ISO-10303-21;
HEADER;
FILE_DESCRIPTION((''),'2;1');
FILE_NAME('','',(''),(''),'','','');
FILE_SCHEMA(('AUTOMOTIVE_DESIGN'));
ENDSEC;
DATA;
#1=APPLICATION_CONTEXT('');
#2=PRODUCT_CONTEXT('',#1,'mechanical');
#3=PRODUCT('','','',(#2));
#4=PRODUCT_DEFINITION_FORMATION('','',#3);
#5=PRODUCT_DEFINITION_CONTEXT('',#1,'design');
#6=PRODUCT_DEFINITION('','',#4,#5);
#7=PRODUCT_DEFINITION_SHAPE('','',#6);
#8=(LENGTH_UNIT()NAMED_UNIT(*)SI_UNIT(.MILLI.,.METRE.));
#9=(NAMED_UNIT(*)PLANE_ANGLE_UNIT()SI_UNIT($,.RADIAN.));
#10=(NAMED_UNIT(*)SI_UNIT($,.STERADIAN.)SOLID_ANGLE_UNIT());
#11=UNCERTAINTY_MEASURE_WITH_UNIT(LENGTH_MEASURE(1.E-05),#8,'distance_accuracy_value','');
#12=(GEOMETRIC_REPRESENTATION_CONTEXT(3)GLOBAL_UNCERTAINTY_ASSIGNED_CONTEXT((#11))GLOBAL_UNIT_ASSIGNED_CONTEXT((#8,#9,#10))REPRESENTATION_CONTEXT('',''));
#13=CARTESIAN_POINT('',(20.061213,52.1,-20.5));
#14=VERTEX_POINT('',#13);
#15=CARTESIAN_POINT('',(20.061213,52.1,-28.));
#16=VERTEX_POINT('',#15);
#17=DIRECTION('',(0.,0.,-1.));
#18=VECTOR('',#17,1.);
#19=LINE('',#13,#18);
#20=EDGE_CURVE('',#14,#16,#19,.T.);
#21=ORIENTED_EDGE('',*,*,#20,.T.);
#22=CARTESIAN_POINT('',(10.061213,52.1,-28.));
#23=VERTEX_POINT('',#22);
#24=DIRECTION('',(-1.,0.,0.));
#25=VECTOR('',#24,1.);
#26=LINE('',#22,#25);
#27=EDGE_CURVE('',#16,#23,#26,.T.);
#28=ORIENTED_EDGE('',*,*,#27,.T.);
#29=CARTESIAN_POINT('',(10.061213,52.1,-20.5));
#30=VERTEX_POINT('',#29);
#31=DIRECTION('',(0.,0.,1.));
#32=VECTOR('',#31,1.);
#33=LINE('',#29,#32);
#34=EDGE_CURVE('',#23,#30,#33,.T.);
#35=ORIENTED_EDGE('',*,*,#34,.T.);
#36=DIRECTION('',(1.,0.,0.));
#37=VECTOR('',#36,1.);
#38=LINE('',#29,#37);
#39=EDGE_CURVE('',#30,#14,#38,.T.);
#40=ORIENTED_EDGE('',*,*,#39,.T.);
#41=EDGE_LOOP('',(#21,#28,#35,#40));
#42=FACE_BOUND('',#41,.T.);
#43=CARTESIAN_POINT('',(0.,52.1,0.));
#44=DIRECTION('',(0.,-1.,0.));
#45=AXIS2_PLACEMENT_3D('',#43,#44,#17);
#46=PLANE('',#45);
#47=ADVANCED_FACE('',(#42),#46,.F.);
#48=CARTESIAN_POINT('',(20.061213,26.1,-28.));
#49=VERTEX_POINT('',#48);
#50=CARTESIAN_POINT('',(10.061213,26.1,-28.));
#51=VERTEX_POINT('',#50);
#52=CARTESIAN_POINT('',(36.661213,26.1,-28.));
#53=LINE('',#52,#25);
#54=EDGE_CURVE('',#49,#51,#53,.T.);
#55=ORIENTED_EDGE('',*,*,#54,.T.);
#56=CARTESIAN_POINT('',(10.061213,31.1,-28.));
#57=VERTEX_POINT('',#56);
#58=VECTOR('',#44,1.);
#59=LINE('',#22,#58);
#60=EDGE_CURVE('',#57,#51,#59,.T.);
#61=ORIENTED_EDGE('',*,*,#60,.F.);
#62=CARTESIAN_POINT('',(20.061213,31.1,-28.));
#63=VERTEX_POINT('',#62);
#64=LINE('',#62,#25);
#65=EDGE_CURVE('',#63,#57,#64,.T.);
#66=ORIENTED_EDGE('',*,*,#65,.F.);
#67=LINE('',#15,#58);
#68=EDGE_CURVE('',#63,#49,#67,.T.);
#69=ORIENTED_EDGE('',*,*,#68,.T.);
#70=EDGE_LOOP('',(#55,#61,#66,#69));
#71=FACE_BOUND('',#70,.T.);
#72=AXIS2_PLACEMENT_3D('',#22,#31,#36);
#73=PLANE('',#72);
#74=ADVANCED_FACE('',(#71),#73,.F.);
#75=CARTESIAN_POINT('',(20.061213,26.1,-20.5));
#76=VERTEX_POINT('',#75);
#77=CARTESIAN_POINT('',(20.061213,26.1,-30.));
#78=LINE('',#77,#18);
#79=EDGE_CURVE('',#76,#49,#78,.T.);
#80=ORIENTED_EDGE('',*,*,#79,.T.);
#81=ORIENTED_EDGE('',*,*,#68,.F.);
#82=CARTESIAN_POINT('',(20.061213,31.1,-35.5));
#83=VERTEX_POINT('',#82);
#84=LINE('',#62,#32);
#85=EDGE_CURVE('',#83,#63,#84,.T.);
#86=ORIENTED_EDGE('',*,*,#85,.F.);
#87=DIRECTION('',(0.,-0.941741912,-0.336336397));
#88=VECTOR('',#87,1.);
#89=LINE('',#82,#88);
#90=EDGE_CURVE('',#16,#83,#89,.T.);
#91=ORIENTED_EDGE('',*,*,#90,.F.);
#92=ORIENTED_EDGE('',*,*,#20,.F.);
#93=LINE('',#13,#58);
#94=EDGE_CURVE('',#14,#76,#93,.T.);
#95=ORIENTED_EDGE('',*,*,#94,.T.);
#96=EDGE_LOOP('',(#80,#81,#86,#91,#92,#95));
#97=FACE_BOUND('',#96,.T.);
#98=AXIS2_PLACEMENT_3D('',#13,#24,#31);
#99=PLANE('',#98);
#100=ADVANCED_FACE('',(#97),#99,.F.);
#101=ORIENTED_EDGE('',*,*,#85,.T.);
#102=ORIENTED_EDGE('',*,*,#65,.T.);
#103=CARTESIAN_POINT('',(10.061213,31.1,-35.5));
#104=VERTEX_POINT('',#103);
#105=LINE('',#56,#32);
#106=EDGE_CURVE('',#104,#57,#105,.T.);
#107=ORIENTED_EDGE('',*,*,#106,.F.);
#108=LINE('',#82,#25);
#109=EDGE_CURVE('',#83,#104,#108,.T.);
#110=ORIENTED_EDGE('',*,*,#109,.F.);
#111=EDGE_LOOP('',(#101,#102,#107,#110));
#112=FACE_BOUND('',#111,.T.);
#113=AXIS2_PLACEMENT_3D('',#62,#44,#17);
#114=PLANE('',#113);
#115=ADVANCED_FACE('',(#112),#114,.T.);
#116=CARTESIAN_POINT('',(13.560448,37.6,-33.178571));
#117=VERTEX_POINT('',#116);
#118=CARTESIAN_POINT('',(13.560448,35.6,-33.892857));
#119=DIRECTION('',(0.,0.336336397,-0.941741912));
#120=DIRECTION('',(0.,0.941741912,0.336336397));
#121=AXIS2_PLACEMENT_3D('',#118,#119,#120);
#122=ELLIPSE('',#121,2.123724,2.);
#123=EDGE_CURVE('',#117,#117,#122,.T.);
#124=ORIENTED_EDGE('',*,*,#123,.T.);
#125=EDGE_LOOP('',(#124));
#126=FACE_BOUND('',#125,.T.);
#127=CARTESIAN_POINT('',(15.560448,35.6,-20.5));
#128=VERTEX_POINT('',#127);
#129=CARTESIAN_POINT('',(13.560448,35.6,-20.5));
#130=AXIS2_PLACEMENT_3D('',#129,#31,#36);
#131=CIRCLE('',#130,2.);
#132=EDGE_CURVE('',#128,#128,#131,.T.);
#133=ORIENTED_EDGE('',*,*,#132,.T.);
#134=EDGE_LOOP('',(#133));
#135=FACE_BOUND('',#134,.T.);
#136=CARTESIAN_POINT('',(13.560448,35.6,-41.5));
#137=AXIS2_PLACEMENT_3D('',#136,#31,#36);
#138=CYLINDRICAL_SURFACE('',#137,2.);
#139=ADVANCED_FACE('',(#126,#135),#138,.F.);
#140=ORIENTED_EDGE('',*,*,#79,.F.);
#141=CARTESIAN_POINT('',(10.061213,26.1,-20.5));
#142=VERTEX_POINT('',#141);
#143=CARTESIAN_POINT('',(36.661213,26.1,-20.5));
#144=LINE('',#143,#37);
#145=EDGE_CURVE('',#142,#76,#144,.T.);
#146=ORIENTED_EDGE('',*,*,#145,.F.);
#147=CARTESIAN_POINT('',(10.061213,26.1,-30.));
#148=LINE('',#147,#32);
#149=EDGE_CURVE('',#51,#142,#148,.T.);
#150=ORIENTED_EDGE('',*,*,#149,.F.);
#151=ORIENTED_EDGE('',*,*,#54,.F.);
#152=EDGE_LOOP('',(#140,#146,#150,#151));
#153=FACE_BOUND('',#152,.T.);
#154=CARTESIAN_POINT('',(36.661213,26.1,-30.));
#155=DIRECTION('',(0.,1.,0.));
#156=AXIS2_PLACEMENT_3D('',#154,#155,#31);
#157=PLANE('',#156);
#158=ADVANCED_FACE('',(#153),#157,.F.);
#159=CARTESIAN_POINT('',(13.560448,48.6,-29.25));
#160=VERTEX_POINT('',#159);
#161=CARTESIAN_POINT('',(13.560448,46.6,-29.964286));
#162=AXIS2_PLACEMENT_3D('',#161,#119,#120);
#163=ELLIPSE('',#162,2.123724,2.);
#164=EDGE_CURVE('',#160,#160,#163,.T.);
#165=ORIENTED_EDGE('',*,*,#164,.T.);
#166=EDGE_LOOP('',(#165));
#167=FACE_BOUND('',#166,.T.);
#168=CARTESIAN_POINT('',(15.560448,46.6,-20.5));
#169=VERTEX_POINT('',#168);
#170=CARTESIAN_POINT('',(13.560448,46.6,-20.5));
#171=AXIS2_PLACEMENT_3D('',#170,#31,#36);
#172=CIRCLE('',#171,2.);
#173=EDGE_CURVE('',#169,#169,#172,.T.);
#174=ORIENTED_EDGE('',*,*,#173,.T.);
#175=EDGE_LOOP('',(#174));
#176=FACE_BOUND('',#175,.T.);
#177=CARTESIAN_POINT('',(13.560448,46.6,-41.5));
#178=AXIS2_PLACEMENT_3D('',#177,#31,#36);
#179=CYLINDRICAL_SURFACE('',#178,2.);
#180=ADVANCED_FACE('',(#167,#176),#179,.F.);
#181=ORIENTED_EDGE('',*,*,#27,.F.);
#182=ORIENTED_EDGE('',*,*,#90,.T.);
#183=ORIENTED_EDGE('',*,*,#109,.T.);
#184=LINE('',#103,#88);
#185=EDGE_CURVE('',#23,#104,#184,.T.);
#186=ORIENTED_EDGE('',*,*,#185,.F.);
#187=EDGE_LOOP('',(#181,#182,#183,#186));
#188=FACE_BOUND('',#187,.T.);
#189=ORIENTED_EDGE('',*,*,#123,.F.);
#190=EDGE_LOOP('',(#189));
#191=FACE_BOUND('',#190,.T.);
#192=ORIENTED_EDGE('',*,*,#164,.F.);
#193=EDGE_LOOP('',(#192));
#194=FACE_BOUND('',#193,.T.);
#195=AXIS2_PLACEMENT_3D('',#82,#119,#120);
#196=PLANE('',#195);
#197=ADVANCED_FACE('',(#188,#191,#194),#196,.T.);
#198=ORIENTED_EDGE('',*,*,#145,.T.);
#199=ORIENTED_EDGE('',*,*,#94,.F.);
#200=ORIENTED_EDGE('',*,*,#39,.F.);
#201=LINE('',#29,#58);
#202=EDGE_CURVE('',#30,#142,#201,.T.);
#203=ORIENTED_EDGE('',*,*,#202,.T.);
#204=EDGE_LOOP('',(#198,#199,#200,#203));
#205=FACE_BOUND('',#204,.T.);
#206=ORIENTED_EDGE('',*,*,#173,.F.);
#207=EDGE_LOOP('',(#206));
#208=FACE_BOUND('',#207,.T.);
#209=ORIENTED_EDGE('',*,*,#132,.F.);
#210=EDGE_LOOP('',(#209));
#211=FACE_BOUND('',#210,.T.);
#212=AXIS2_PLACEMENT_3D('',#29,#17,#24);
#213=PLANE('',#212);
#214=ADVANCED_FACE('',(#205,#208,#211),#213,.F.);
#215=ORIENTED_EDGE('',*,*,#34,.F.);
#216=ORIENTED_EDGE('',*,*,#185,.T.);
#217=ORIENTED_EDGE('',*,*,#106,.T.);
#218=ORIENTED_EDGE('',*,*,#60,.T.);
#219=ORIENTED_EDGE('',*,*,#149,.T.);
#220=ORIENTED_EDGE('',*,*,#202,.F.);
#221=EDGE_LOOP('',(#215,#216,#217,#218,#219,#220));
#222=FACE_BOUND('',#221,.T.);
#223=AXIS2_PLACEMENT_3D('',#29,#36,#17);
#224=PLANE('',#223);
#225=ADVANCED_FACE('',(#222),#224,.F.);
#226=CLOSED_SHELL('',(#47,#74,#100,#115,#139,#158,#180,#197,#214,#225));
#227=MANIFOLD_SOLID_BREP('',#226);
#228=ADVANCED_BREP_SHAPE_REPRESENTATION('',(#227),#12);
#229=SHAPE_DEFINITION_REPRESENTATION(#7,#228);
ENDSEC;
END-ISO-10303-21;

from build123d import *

# Parameters (mm, degrees)
SALIENTE_EXTRUIR1_DEPTH    = 10
CROQUIS2_W                 = 5
CROQUIS2_H                 = 45
CORTAR_EXTRUIR1_DEPTH      = 12.5
CROQUIS4_W                 = 73.322426794
CROQUIS4_H                 = 5
SALIENTE_EXTRUIR2_DEPTH    = 30
CROQUIS5_W                 = 2.5
CROQUIS5_H                 = 5
SALIENTE_EXTRUIR3_DEPTH    = 50
CROQUIS6_W                 = 55.637494131
CROQUIS6_H                 = 64.414873678
CORTAR_EXTRUIR2_DEPTH      = 55
CROQUIS7_R                 = 1.5
CORTAR_EXTRUIR3_DEPTH      = 5
CROQUIS8_W                 = 39.981329184
CROQUIS8_H                 = 5
CORTAR_EXTRUIR4_DEPTH      = 10
CROQUIS9_W                 = 10
CROQUIS9_H                 = 7.5
SALIENTE_EXTRUIR4_DEPTH    = 21
CROQUIS11_R                = 2
CORTAR_EXTRUIR5_DEPTH      = 21
SALIENTE_EXTRUIR5_START    = -40
CROQUIS12_W                = 21.008716652
CROQUIS12_H                = 5
SALIENTE_EXTRUIR5_DEPTH    = 40
CORTAR_EXTRUIR6_DEPTH      = 62.200166864
CROQUIS15_W                = 5
CROQUIS15_H                = 10
SALIENTE_EXTRUIR6_DEPTH    = 31.1
SALIENTE_EXTRUIR7_DEPTH    = 10
SALIENTE_EXTRUIR8_DEPTH    = 5
CORTAR_EXTRUIR7_START      = -13
CROQUIS21_R                = 1.5
CORTAR_EXTRUIR7_DEPTH      = 13
CORTAR_EXTRUIR10_START     = -52.1
CORTAR_EXTRUIR10_OUTLINE_W = 10
CORTAR_EXTRUIR10_OUTLINE_H = 7.5
CORTAR_EXTRUIR10_DEPTH     = 52.1
SALIENTE_EXTRUIR9_DEPTH    = 10
CROQUIS24_R                = 2
CORTAR_EXTRUIR11_DEPTH     = 10


# Read off the part's stored shape, not the designer's step: Cortar-Extruir10
with BuildPart() as part:
    # Croquis1 → Saliente-Extruir1 (new body)
    with BuildSketch(Plane.XY):
        with BuildLine():
            Line((-35, 10), (-35, 0))
            Line((-35, 0), (-30, 0))
            Line((-30, 0), (-30, 10))
            Line((-30, 10), (-20, 10))
            Line((-20, 10), (-20, 35.723707224))
            ThreePointArc((-20, 35.723707224), (0, 55.723707224), (20, 35.723707224))
            Line((20, 35.723707224), (20, 10))
            Line((20, 10), (30, 10))
            Line((30, 10), (30, 0))
            Line((30, 0), (35, 0))
            Line((35, 0), (35, 10))
            Line((35, 10), (39, 10))
            Line((39, 10), (39, 20))
            Line((39, 20), (14.443351433, 84.048407017))
            Line((14.443351433, 84.048407017), (13.447706691, 86.645237749))
            ThreePointArc((13.447706691, 86.645237749), (0, 95), (-13.447706691, 86.645237749))
            Line((-13.447706691, 86.645237749), (-14.443351433, 84.048407017))
            Line((-14.443351433, 84.048407017), (-39, 20))
            Line((-39, 20), (-39, 10))
            Line((-39, 10), (-35, 10))
        make_face()
        with BuildLine():
            ThreePointArc((1.5, 60), (0, 58.5), (-1.5, 60))
            Line((-1.5, 60), (-1.5, 80))
            ThreePointArc((-1.5, 80), (0, 81.5), (1.5, 80))
            Line((1.5, 80), (1.5, 60))
        make_face(mode=Mode.SUBTRACT)
    extrude(amount=SALIENTE_EXTRUIR1_DEPTH)

    # Croquis2 → Cortar-Extruir1 (cut, symmetric)
    with BuildSketch(Plane(origin=(0, 0, 0), x_dir=(0, 0, -1), z_dir=(1, 0, 0))):
        with Locations((-5, 72.5)):
            Rectangle(CROQUIS2_W, CROQUIS2_H)
    extrude(amount=CORTAR_EXTRUIR1_DEPTH, both=True, mode=Mode.SUBTRACT)

    # Croquis4 → Saliente-Extruir2 (add)
    with BuildSketch(Plane(origin=(0, 0, 0), x_dir=(-1, 0, 0), z_dir=(0, 0, -1))):
        with Locations((0, 28.6)):
            Rectangle(CROQUIS4_W, CROQUIS4_H)
    extrude(amount=SALIENTE_EXTRUIR2_DEPTH)

    # Croquis5 → Saliente-Extruir3 (add)
    with BuildSketch(Plane(origin=(-20, 0, 0), x_dir=(0, 0, -1), z_dir=(1, 0, 0))):
        with Locations((-8.75, 28.6)):
            Rectangle(CROQUIS5_W, CROQUIS5_H)
    extrude(amount=SALIENTE_EXTRUIR3_DEPTH)

    # Croquis6 → Cortar-Extruir2 (cut, symmetric)
    with BuildSketch(Plane(origin=(-20, 0, 0), x_dir=(0, 0, -1), z_dir=(1, 0, 0))):
        with Locations((17.818747066, 63.307436839)):
            Rectangle(CROQUIS6_W, CROQUIS6_H)
    extrude(amount=CORTAR_EXTRUIR2_DEPTH, both=True, mode=Mode.SUBTRACT)

    # Croquis7 → Cortar-Extruir3 (cut)
    with BuildSketch(Plane.XY.offset(10)):
        with Locations((0, 28.6)):
            Circle(CROQUIS7_R)
    extrude(amount=-CORTAR_EXTRUIR3_DEPTH, mode=Mode.SUBTRACT)

    # Croquis8 → Cortar-Extruir4 (cut)
    with BuildSketch(Plane(origin=(0, 31.1, 0), x_dir=(1, 0, 0), z_dir=(0, 1, 0))):
        with Locations((-0.009335408, 2.5)):
            Rectangle(CROQUIS8_W, CROQUIS8_H)
    extrude(amount=-CORTAR_EXTRUIR4_DEPTH, mode=Mode.SUBTRACT)

    # Croquis9 → Saliente-Extruir4 (add)
    with BuildSketch(Plane(origin=(0, 31.1, 0), x_dir=(1, 0, 0), z_dir=(0, 1, 0))):
        with Locations((15.061213397, 24.25)):
            Rectangle(CROQUIS9_W, CROQUIS9_H)
        with Locations((-35.940317185, 24.25)):
            Rectangle(CROQUIS9_W, CROQUIS9_H)
    extrude(amount=SALIENTE_EXTRUIR4_DEPTH)

    # Croquis11 → Cortar-Extruir5 (cut)
    with BuildSketch(Plane.XY.offset(-20.5)):
        with Locations((13.560448106, 46.6)):
            Circle(CROQUIS11_R)
        with Locations((13.560448106, 35.6)):
            Circle(CROQUIS11_R)
        with Locations((-34.439551894, 46.6)):
            Circle(CROQUIS11_R)
        with Locations((-34.439551894, 35.6)):
            Circle(CROQUIS11_R)
    extrude(amount=-CORTAR_EXTRUIR5_DEPTH, mode=Mode.SUBTRACT)

    # Croquis12 → Saliente-Extruir5 (add)
    with BuildSketch(Plane(origin=(0, 0, -30), x_dir=(-1, 0, 0), z_dir=(0, 0, -1)).offset(SALIENTE_EXTRUIR5_START)):
        with Locations((32.834428277, 28.6)):
            Rectangle(CROQUIS12_W, CROQUIS12_H)
    extrude(amount=SALIENTE_EXTRUIR5_DEPTH)

    # Croquis13 → Cortar-Extruir6 (cut, through all)
    with BuildSketch(Plane(origin=(0, 31.1, 0), x_dir=(1, 0, 0), z_dir=(0, 1, 0))):
        Polygon((34.744175198, 0), (36.661213397, 0), (36.661213397, 30), (21.661213397, 30), align=None)
    extrude(amount=-CORTAR_EXTRUIR6_DEPTH, mode=Mode.SUBTRACT)

    # Croquis15 → Saliente-Extruir6 (add)
    with BuildSketch(Plane(origin=(0, 31.1, 0), x_dir=(1, 0, 0), z_dir=(0, 1, 0))):
        with Locations((0, 25)):
            Rectangle(CROQUIS15_W, CROQUIS15_H)
    extrude(amount=-SALIENTE_EXTRUIR6_DEPTH)

    # Croquis18 → Saliente-Extruir7 (add)
    with BuildSketch(Plane.XY.offset(10)):
        Polygon((-39, 10), (-43.338786603, 26.1), (-36.661213397, 26.1), align=None)
    extrude(amount=-SALIENTE_EXTRUIR7_DEPTH)


with BuildPart() as body_2:
    # Croquis20 → Saliente-Extruir8 (new body)
    with BuildSketch(Plane(origin=(0, 31.1, 0), x_dir=(1, 0, 0), z_dir=(0, 1, 0))):
        Polygon((-1.624735856, -15), (1.624735856, -15), (34.744175198, -10), (-43.338786603, -10), align=None)
    extrude(amount=-SALIENTE_EXTRUIR8_DEPTH)

    # Croquis21 → Cortar-Extruir7 (cut)
    with BuildSketch(Plane(origin=(0, 0, 7.5), x_dir=(-1, 0, 0), z_dir=(0, 0, -1)).offset(CORTAR_EXTRUIR7_START)):
        with Locations(Location((0, 28.6, 0), (0, 0, 180))):
            Circle(CROQUIS21_R)
    extrude(amount=CORTAR_EXTRUIR7_DEPTH, mode=Mode.SUBTRACT)


with BuildPart() as cortar_extruir10_tool:
    # Cortar-Extruir10 outline → Cortar-Extruir10 (new body)
    with BuildSketch(Plane(origin=(0, 52.1, 0), x_dir=(1, 0, 0), z_dir=(0, 1, 0)).offset(CORTAR_EXTRUIR10_START)):
        Polygon((1.624735856, -15), (34.744175198, -10), (39, -10), (39, 0), (34.744175198, 0), (21.661213397, 30), (-43.338786603, 30), (-43.338786603, -10), (-1.624735856, -15), align=None)
        Polygon((20, -7.5), (-20, -7.5), (-20, 5), (19.981329184, 5), (19.981329184, 0), (20, 0), align=None, mode=Mode.SUBTRACT)
        with Locations((15.061213397, 24.25)):
            Rectangle(CORTAR_EXTRUIR10_OUTLINE_W, CORTAR_EXTRUIR10_OUTLINE_H, mode=Mode.SUBTRACT)
    extrude(amount=CORTAR_EXTRUIR10_DEPTH)


with BuildPart() as part_1:
    add(part.part)

    # Cortar-Extruir10: cut by cortar_extruir10_tool
    add(cortar_extruir10_tool.part, mode=Mode.SUBTRACT)

    # Croquis23 → Saliente-Extruir9 (add)
    with BuildSketch(Plane.ZY.offset(-10.061213397)):
        Polygon((-28, 31.1), (-35.5, 31.1), (-28, 52.1), align=None)
    extrude(amount=-SALIENTE_EXTRUIR9_DEPTH)

    # Croquis24 → Cortar-Extruir11 (cut)
    with BuildSketch(Plane.XY.offset(-28)):
        with Locations((13.560448106, 46.6)):
            Circle(CROQUIS24_R)
        with Locations((13.560448106, 35.6)):
            Circle(CROQUIS24_R)
    extrude(amount=-CORTAR_EXTRUIR11_DEPTH, mode=Mode.SUBTRACT)


with BuildPart() as body_2_1:
    add(body_2.part)

    # Cortar-Extruir10: cut by cortar_extruir10_tool
    add(cortar_extruir10_tool.part, mode=Mode.SUBTRACT)


solid = part_1.part
